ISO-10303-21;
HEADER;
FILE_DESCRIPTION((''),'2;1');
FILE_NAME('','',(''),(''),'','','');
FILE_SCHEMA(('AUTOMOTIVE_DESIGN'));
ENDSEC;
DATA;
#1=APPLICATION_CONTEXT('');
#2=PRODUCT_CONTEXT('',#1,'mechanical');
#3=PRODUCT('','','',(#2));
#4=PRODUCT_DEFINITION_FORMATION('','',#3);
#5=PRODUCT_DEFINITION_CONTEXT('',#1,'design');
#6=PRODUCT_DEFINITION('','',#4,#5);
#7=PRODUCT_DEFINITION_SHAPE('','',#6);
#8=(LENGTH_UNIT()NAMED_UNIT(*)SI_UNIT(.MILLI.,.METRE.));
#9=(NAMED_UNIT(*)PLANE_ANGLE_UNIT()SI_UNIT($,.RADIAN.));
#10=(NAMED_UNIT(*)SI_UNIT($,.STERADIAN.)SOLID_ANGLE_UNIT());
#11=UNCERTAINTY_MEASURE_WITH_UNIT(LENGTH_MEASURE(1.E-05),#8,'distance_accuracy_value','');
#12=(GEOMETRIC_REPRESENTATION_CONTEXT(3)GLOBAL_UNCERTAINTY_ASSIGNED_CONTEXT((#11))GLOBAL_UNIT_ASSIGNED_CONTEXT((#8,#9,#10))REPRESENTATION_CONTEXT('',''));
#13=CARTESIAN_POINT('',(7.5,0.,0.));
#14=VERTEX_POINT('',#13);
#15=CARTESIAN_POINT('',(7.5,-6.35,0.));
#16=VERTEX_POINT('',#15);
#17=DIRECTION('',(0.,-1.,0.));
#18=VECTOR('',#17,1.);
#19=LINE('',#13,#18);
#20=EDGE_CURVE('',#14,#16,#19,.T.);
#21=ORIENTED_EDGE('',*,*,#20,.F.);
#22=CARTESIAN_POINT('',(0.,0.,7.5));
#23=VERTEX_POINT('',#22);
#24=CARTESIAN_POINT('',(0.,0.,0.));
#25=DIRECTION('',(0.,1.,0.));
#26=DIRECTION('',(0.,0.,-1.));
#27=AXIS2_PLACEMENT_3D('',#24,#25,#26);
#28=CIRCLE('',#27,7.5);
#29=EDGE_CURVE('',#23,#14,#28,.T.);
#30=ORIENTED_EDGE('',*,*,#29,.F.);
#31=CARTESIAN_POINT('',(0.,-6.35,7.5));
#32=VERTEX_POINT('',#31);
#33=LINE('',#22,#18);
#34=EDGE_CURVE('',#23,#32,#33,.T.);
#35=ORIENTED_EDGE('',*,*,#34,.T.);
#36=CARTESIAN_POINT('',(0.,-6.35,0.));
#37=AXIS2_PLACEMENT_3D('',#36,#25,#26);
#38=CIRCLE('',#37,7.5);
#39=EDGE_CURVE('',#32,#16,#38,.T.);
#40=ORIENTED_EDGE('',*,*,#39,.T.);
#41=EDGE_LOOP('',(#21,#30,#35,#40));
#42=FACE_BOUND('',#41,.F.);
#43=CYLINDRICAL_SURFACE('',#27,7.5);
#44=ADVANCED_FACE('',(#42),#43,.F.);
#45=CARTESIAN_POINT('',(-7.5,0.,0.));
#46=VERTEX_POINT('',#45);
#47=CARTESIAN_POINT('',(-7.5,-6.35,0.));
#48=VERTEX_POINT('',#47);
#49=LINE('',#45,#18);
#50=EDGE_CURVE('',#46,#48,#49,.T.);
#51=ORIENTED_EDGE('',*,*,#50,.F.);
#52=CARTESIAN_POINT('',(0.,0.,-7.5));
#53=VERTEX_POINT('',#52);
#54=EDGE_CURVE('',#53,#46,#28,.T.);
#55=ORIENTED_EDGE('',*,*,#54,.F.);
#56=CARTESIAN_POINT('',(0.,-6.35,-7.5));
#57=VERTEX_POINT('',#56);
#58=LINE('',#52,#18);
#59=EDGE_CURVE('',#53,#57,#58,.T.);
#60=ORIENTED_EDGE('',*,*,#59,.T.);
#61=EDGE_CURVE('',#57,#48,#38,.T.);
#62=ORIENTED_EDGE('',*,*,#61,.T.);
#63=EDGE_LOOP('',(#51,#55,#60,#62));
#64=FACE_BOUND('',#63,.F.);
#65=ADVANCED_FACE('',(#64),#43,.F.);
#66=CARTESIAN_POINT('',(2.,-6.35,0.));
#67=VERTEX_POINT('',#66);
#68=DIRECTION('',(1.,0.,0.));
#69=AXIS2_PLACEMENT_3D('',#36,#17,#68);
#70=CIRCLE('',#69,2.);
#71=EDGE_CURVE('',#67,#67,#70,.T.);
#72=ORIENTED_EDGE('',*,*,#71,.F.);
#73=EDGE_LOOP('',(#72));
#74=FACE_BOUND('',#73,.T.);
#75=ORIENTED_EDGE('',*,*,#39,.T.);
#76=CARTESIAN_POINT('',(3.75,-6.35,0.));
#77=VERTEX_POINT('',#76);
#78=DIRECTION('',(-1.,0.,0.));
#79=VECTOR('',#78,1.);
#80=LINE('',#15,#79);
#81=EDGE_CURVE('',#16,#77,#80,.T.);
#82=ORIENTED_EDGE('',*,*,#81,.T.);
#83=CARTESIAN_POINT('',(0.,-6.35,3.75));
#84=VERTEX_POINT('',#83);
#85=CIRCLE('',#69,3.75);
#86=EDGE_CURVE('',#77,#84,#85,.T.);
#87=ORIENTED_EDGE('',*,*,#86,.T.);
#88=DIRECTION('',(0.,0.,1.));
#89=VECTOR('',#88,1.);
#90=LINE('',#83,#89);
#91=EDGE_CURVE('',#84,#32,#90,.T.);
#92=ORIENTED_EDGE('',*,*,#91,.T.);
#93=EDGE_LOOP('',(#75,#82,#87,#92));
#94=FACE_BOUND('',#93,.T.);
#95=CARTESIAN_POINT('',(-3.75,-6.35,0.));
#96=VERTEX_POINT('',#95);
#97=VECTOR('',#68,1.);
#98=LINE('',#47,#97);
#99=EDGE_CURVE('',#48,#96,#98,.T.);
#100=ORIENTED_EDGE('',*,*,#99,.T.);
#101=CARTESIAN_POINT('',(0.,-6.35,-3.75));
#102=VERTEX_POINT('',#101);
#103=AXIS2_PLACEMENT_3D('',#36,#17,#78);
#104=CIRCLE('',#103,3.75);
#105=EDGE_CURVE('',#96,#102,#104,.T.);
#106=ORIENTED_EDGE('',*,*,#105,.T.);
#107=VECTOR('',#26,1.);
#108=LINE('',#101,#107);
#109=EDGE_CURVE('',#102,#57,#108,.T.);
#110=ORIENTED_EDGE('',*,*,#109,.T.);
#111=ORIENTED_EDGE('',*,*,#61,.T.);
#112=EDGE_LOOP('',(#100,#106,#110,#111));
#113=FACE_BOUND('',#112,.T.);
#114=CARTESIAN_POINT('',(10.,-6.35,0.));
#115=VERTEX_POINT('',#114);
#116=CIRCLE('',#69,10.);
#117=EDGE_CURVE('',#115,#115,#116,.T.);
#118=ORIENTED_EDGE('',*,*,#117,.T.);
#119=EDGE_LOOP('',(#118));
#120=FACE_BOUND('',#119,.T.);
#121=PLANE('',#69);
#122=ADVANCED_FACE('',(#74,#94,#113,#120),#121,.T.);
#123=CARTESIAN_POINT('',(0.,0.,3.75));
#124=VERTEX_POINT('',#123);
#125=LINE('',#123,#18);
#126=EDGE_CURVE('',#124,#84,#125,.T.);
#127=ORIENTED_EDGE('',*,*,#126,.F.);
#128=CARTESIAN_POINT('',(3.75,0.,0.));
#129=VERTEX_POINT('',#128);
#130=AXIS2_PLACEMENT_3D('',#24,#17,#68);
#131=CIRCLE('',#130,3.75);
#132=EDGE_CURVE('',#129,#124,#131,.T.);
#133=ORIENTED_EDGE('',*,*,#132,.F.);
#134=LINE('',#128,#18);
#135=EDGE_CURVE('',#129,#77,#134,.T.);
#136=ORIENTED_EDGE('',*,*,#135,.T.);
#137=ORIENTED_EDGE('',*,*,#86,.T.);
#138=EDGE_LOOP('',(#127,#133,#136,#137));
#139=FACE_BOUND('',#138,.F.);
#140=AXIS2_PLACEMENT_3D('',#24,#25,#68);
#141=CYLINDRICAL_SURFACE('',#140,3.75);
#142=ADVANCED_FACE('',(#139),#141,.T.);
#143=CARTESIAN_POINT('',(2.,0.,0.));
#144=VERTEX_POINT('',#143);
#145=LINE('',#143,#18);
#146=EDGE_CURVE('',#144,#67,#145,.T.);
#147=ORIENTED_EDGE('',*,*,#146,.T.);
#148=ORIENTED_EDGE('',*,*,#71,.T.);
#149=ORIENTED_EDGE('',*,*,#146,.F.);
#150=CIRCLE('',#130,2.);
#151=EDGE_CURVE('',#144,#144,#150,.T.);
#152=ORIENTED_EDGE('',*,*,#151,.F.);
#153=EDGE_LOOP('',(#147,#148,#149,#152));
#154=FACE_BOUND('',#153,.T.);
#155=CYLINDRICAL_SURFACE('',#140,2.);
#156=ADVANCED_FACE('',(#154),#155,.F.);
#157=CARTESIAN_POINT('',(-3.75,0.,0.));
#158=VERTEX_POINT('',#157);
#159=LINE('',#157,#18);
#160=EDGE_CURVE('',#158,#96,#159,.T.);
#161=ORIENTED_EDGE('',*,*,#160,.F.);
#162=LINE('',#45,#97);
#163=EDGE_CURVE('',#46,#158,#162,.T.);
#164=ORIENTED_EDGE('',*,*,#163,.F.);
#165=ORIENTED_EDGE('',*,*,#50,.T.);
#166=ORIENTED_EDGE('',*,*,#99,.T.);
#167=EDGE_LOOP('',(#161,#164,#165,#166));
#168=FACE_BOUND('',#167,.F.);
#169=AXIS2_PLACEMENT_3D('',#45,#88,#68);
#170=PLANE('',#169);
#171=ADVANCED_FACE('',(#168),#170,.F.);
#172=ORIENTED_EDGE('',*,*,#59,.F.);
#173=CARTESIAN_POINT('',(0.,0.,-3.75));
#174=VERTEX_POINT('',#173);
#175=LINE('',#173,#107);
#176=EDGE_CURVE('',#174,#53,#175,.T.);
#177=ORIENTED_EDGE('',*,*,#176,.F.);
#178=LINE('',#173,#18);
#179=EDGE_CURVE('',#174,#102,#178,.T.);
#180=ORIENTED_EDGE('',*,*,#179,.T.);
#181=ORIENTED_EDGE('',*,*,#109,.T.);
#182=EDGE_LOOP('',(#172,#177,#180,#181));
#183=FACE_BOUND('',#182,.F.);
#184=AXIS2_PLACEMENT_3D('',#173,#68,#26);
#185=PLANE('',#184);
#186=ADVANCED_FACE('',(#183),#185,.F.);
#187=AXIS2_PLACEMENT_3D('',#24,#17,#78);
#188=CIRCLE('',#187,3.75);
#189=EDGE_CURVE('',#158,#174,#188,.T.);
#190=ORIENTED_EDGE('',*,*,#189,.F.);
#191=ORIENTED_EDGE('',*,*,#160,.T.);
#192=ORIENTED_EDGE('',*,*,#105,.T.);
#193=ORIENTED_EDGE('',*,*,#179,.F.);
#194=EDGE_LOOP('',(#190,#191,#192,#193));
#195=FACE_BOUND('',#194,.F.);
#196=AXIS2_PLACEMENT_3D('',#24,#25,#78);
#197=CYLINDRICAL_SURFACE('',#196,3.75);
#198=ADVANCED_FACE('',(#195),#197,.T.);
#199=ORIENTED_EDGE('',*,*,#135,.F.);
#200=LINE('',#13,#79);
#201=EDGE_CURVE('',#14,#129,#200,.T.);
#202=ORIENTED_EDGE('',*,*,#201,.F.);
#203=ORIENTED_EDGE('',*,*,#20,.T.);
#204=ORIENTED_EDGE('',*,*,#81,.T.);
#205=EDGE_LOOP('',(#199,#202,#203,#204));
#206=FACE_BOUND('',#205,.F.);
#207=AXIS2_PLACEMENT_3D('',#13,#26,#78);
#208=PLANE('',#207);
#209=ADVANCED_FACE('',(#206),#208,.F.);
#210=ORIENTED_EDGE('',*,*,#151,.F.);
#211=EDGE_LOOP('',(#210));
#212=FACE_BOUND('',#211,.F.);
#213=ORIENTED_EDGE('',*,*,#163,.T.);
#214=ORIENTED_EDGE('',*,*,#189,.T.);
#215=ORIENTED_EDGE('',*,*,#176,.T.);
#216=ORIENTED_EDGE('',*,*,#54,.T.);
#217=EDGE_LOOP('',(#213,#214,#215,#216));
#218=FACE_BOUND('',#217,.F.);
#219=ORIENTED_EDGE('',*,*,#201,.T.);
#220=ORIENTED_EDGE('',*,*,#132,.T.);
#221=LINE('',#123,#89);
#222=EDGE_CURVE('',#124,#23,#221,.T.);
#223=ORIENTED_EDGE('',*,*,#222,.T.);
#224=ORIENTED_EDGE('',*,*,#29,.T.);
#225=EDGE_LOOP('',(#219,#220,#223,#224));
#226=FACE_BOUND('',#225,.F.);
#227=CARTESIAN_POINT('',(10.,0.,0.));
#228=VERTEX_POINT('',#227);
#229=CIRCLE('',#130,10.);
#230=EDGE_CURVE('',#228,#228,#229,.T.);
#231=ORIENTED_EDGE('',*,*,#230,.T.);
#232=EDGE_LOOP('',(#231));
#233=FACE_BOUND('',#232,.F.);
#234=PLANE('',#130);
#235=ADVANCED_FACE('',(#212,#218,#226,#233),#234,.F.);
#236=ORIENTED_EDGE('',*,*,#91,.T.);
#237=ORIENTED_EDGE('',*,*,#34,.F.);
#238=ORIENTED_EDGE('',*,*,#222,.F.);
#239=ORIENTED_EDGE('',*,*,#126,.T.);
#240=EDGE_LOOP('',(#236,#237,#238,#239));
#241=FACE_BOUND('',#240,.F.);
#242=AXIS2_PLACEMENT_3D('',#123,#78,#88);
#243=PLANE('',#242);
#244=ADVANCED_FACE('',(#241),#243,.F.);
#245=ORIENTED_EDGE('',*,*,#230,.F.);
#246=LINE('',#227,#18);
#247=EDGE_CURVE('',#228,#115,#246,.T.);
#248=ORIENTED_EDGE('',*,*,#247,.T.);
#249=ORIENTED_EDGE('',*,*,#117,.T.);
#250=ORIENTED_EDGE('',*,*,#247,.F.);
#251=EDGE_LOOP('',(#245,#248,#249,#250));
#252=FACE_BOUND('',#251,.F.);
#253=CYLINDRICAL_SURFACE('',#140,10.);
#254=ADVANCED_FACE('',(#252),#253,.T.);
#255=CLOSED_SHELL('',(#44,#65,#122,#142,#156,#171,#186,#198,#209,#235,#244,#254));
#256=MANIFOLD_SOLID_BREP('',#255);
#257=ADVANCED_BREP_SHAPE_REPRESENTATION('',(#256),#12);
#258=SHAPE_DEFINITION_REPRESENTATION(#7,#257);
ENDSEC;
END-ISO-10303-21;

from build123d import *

# Parameters (mm, degrees)
F0_R     = 10
F0_R_2   = 2
F1_DEPTH = 6.35


# Not quite as in the source:
# - a length typed as a fraction of an inch, garbled in the dataset ("3 / 203.2 mm" for 3/8 in), is restored


with BuildPart() as f1:
    # F0 (on Front) → F1 (new body)
    with BuildSketch(Plane.XZ):
        Circle(F0_R)
        with BuildLine():
            ThreePointArc((0, 7.5), (5.3033008589, 5.3033008589), (7.5, 0))
            ThreePointArc((7.5, 0), (5.3033008589, -5.3033008589), (0, -7.5))
            ThreePointArc((0, -7.5), (-5.3033008589, -5.3033008589), (-7.5, 0))
            ThreePointArc((-7.5, 0), (-5.3033008589, 5.3033008589), (0, 7.5))
        make_face(mode=Mode.SUBTRACT)
        with BuildLine():
            ThreePointArc((0, -7.5), (5.3033008589, -5.3033008589), (7.5, 0))
            Line((7.5, 0), (3.75, 0))
            ThreePointArc((3.75, 0), (2.6516504294, -2.6516504294), (0, -3.75))
            Line((0, -3.75), (0, -7.5))
        make_face()
        with BuildLine():
            Line((0, 3.75), (0, 7.5))
            ThreePointArc((0, 7.5), (-5.3033008589, 5.3033008589), (-7.5, 0))
            Line((-7.5, 0), (-3.75, 0))
            ThreePointArc((-3.75, 0), (-2.6516504294, 2.6516504294), (0, 3.75))
        make_face()
        with BuildLine():
            ThreePointArc((0, -3.75), (2.6516504294, -2.6516504294), (3.75, 0))
            ThreePointArc((3.75, 0), (2.6516504294, 2.6516504294), (0, 3.75))
            ThreePointArc((0, 3.75), (-2.6516504294, 2.6516504294), (-3.75, 0))
            ThreePointArc((-3.75, 0), (-2.6516504294, -2.6516504294), (0, -3.75))
        make_face()
        Circle(F0_R_2, mode=Mode.SUBTRACT)
    extrude(amount=F1_DEPTH)


solid = f1.part
